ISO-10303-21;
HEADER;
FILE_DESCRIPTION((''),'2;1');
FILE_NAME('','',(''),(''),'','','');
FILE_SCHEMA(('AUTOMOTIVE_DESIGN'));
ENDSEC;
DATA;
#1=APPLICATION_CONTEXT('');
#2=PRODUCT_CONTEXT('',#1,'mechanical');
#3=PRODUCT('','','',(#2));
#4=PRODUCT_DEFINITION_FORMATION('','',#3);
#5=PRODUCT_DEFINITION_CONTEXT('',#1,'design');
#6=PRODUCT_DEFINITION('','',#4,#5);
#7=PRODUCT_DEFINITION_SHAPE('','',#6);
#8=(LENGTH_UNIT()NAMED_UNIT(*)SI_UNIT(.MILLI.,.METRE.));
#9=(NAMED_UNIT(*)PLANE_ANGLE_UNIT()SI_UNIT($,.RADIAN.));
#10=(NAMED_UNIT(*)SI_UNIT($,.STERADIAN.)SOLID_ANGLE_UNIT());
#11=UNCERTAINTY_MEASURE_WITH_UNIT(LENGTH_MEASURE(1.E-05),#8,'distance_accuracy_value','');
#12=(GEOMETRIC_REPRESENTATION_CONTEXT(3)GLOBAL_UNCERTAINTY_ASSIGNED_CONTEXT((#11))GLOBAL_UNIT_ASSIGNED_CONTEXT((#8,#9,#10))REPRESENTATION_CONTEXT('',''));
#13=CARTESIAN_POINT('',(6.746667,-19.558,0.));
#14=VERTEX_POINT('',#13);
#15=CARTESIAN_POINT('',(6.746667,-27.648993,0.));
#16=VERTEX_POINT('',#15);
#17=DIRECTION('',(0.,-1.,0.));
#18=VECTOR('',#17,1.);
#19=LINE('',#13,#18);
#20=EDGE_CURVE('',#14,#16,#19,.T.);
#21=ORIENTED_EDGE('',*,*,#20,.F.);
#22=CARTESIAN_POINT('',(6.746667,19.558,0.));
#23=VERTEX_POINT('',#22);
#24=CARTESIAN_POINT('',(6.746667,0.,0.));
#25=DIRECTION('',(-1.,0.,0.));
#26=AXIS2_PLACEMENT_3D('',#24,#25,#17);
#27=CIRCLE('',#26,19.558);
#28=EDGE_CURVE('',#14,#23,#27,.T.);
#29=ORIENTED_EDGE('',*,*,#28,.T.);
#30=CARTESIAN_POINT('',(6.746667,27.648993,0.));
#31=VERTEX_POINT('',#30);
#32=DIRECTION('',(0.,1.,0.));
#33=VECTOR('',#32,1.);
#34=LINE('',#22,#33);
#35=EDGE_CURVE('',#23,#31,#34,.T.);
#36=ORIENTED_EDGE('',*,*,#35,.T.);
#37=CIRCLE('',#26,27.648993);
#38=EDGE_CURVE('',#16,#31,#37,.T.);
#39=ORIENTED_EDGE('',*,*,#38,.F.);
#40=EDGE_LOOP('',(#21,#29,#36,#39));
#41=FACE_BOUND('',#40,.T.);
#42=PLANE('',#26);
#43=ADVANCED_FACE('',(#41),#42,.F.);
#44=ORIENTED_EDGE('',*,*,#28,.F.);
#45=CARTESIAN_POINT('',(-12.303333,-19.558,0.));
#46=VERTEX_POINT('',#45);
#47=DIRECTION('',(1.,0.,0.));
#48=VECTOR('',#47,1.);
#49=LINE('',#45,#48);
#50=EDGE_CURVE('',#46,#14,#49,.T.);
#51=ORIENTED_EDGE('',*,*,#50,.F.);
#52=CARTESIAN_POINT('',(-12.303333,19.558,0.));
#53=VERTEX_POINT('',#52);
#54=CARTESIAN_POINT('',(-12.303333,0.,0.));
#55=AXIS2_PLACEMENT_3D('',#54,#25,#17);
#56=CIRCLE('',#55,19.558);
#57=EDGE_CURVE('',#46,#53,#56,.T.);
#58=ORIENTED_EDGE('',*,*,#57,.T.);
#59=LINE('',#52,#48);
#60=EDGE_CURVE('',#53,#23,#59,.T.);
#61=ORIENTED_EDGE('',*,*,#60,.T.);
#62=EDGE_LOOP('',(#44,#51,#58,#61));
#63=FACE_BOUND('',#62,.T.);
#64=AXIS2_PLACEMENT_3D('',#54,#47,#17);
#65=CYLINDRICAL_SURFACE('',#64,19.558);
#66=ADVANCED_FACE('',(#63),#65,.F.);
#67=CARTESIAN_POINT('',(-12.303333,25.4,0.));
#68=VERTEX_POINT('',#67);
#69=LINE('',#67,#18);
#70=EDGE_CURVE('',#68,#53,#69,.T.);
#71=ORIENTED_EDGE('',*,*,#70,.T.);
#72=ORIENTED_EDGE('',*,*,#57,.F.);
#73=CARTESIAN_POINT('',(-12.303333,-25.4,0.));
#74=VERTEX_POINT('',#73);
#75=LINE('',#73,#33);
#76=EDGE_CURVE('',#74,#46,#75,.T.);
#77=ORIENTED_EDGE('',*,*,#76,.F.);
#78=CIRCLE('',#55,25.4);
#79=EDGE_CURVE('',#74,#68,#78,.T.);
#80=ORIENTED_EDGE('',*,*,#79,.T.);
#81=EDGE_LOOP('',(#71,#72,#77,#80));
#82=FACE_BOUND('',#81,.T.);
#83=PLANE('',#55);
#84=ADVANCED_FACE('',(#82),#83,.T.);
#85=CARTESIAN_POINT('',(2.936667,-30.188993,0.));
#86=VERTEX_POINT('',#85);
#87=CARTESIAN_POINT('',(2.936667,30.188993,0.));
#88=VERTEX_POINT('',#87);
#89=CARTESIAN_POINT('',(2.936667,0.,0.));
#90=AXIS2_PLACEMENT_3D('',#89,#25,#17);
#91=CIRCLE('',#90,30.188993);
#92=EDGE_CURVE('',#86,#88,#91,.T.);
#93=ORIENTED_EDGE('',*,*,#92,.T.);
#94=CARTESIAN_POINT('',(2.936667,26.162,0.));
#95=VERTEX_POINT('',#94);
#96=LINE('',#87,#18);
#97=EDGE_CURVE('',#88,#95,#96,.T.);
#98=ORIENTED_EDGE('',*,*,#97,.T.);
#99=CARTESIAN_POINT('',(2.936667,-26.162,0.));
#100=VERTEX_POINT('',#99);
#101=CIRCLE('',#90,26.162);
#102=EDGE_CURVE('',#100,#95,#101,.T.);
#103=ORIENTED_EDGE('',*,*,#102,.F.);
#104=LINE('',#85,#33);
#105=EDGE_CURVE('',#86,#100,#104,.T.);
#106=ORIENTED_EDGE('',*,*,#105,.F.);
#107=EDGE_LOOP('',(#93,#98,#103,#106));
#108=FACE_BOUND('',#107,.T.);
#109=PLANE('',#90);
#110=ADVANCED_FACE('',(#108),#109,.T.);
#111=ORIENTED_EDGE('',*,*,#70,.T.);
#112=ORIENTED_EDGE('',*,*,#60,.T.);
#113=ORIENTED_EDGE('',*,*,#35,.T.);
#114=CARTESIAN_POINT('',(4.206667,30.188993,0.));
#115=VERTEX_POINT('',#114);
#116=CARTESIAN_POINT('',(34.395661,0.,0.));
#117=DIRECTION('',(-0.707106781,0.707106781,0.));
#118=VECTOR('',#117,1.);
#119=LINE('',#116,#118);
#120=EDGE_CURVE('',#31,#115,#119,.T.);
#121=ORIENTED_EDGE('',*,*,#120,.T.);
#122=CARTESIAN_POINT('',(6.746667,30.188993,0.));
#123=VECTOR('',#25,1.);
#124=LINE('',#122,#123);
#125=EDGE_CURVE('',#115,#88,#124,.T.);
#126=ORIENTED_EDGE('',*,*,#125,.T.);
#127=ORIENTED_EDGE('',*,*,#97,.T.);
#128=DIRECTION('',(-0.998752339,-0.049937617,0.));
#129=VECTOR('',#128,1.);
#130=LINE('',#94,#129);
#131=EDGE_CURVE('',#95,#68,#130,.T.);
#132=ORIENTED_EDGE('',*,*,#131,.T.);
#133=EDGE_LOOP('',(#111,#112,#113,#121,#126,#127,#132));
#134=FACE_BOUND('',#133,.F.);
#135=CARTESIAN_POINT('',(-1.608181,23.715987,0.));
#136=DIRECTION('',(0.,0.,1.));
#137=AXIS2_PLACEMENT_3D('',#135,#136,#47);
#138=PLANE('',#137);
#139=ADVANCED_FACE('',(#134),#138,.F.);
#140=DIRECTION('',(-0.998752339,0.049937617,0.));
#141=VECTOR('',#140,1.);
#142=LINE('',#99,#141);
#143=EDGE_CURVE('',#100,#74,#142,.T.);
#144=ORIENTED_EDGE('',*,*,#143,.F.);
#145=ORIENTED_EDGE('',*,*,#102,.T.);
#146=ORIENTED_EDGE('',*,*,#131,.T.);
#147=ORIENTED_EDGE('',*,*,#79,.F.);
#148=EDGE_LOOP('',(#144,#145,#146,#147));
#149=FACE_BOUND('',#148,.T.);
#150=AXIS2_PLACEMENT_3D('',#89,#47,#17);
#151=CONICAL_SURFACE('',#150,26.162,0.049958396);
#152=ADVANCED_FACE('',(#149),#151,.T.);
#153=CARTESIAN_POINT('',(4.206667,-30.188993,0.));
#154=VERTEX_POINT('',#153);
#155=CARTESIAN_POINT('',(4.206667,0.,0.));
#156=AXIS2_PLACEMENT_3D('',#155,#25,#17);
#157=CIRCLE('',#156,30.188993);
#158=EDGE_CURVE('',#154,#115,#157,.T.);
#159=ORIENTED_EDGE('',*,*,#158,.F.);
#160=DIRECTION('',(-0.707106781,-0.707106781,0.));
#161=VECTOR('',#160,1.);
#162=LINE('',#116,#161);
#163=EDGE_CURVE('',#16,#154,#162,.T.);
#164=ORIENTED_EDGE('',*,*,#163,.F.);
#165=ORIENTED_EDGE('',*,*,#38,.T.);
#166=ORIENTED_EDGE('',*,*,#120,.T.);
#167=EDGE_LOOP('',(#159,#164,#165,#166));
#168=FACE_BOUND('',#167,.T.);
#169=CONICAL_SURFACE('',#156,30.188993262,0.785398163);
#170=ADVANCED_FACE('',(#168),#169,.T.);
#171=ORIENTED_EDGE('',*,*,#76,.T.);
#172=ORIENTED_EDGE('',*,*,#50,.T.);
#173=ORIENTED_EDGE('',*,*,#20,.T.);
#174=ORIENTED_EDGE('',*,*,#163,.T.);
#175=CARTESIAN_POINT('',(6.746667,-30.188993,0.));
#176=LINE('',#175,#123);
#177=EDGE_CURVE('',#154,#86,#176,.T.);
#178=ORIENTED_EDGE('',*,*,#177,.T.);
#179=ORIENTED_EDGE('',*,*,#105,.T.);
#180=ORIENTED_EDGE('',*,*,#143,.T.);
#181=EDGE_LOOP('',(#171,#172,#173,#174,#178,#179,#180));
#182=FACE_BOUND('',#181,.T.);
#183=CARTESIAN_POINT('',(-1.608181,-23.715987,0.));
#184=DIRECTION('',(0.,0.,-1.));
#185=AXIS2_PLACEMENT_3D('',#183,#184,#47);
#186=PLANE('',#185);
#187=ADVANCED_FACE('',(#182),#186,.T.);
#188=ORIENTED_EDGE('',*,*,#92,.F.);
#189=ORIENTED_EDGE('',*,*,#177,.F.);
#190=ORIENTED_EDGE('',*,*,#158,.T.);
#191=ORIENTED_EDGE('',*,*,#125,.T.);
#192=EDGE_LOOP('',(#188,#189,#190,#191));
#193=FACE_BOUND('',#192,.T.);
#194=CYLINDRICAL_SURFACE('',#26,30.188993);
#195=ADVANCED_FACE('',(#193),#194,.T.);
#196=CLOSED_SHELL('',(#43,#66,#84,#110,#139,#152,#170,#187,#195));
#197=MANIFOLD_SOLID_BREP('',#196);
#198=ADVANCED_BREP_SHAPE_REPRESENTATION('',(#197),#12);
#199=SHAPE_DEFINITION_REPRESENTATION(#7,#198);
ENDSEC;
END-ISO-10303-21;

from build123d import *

# Parameters (mm, degrees)
F2_ANGLE_BACK = 90
F2_ANGLE      = 180
F3_SIZE       = 2.54


with BuildPart() as f2:
    # F0 (on Front) → F2 (revolve)
    with BuildSketch(Plane.XZ, mode=Mode.PRIVATE) as f2_sk:
        Polygon((2.9366673195, 26.162), (-12.3033326805, 25.4), (-12.3033326805, 19.558), (6.7466673195, 19.558), (6.7466673195, 30.1889932623), (2.9366673195, 30.1889932623), align=None)
    revolve(f2_sk.sketch.rotate(Axis((-24.6385950595, 0, 0), (-1, 0, 0)), -F2_ANGLE_BACK), axis=Axis((-24.6385950595, 0, 0), (-1, 0, 0)), revolution_arc=F2_ANGLE)

    # F3
    f3_edges = [f2.edges().sort_by_distance(p)[0] for p in [
        (6.746667, 0, 30.188993),
    ]]
    chamfer(f3_edges, length=F3_SIZE)


solid = f2.part
